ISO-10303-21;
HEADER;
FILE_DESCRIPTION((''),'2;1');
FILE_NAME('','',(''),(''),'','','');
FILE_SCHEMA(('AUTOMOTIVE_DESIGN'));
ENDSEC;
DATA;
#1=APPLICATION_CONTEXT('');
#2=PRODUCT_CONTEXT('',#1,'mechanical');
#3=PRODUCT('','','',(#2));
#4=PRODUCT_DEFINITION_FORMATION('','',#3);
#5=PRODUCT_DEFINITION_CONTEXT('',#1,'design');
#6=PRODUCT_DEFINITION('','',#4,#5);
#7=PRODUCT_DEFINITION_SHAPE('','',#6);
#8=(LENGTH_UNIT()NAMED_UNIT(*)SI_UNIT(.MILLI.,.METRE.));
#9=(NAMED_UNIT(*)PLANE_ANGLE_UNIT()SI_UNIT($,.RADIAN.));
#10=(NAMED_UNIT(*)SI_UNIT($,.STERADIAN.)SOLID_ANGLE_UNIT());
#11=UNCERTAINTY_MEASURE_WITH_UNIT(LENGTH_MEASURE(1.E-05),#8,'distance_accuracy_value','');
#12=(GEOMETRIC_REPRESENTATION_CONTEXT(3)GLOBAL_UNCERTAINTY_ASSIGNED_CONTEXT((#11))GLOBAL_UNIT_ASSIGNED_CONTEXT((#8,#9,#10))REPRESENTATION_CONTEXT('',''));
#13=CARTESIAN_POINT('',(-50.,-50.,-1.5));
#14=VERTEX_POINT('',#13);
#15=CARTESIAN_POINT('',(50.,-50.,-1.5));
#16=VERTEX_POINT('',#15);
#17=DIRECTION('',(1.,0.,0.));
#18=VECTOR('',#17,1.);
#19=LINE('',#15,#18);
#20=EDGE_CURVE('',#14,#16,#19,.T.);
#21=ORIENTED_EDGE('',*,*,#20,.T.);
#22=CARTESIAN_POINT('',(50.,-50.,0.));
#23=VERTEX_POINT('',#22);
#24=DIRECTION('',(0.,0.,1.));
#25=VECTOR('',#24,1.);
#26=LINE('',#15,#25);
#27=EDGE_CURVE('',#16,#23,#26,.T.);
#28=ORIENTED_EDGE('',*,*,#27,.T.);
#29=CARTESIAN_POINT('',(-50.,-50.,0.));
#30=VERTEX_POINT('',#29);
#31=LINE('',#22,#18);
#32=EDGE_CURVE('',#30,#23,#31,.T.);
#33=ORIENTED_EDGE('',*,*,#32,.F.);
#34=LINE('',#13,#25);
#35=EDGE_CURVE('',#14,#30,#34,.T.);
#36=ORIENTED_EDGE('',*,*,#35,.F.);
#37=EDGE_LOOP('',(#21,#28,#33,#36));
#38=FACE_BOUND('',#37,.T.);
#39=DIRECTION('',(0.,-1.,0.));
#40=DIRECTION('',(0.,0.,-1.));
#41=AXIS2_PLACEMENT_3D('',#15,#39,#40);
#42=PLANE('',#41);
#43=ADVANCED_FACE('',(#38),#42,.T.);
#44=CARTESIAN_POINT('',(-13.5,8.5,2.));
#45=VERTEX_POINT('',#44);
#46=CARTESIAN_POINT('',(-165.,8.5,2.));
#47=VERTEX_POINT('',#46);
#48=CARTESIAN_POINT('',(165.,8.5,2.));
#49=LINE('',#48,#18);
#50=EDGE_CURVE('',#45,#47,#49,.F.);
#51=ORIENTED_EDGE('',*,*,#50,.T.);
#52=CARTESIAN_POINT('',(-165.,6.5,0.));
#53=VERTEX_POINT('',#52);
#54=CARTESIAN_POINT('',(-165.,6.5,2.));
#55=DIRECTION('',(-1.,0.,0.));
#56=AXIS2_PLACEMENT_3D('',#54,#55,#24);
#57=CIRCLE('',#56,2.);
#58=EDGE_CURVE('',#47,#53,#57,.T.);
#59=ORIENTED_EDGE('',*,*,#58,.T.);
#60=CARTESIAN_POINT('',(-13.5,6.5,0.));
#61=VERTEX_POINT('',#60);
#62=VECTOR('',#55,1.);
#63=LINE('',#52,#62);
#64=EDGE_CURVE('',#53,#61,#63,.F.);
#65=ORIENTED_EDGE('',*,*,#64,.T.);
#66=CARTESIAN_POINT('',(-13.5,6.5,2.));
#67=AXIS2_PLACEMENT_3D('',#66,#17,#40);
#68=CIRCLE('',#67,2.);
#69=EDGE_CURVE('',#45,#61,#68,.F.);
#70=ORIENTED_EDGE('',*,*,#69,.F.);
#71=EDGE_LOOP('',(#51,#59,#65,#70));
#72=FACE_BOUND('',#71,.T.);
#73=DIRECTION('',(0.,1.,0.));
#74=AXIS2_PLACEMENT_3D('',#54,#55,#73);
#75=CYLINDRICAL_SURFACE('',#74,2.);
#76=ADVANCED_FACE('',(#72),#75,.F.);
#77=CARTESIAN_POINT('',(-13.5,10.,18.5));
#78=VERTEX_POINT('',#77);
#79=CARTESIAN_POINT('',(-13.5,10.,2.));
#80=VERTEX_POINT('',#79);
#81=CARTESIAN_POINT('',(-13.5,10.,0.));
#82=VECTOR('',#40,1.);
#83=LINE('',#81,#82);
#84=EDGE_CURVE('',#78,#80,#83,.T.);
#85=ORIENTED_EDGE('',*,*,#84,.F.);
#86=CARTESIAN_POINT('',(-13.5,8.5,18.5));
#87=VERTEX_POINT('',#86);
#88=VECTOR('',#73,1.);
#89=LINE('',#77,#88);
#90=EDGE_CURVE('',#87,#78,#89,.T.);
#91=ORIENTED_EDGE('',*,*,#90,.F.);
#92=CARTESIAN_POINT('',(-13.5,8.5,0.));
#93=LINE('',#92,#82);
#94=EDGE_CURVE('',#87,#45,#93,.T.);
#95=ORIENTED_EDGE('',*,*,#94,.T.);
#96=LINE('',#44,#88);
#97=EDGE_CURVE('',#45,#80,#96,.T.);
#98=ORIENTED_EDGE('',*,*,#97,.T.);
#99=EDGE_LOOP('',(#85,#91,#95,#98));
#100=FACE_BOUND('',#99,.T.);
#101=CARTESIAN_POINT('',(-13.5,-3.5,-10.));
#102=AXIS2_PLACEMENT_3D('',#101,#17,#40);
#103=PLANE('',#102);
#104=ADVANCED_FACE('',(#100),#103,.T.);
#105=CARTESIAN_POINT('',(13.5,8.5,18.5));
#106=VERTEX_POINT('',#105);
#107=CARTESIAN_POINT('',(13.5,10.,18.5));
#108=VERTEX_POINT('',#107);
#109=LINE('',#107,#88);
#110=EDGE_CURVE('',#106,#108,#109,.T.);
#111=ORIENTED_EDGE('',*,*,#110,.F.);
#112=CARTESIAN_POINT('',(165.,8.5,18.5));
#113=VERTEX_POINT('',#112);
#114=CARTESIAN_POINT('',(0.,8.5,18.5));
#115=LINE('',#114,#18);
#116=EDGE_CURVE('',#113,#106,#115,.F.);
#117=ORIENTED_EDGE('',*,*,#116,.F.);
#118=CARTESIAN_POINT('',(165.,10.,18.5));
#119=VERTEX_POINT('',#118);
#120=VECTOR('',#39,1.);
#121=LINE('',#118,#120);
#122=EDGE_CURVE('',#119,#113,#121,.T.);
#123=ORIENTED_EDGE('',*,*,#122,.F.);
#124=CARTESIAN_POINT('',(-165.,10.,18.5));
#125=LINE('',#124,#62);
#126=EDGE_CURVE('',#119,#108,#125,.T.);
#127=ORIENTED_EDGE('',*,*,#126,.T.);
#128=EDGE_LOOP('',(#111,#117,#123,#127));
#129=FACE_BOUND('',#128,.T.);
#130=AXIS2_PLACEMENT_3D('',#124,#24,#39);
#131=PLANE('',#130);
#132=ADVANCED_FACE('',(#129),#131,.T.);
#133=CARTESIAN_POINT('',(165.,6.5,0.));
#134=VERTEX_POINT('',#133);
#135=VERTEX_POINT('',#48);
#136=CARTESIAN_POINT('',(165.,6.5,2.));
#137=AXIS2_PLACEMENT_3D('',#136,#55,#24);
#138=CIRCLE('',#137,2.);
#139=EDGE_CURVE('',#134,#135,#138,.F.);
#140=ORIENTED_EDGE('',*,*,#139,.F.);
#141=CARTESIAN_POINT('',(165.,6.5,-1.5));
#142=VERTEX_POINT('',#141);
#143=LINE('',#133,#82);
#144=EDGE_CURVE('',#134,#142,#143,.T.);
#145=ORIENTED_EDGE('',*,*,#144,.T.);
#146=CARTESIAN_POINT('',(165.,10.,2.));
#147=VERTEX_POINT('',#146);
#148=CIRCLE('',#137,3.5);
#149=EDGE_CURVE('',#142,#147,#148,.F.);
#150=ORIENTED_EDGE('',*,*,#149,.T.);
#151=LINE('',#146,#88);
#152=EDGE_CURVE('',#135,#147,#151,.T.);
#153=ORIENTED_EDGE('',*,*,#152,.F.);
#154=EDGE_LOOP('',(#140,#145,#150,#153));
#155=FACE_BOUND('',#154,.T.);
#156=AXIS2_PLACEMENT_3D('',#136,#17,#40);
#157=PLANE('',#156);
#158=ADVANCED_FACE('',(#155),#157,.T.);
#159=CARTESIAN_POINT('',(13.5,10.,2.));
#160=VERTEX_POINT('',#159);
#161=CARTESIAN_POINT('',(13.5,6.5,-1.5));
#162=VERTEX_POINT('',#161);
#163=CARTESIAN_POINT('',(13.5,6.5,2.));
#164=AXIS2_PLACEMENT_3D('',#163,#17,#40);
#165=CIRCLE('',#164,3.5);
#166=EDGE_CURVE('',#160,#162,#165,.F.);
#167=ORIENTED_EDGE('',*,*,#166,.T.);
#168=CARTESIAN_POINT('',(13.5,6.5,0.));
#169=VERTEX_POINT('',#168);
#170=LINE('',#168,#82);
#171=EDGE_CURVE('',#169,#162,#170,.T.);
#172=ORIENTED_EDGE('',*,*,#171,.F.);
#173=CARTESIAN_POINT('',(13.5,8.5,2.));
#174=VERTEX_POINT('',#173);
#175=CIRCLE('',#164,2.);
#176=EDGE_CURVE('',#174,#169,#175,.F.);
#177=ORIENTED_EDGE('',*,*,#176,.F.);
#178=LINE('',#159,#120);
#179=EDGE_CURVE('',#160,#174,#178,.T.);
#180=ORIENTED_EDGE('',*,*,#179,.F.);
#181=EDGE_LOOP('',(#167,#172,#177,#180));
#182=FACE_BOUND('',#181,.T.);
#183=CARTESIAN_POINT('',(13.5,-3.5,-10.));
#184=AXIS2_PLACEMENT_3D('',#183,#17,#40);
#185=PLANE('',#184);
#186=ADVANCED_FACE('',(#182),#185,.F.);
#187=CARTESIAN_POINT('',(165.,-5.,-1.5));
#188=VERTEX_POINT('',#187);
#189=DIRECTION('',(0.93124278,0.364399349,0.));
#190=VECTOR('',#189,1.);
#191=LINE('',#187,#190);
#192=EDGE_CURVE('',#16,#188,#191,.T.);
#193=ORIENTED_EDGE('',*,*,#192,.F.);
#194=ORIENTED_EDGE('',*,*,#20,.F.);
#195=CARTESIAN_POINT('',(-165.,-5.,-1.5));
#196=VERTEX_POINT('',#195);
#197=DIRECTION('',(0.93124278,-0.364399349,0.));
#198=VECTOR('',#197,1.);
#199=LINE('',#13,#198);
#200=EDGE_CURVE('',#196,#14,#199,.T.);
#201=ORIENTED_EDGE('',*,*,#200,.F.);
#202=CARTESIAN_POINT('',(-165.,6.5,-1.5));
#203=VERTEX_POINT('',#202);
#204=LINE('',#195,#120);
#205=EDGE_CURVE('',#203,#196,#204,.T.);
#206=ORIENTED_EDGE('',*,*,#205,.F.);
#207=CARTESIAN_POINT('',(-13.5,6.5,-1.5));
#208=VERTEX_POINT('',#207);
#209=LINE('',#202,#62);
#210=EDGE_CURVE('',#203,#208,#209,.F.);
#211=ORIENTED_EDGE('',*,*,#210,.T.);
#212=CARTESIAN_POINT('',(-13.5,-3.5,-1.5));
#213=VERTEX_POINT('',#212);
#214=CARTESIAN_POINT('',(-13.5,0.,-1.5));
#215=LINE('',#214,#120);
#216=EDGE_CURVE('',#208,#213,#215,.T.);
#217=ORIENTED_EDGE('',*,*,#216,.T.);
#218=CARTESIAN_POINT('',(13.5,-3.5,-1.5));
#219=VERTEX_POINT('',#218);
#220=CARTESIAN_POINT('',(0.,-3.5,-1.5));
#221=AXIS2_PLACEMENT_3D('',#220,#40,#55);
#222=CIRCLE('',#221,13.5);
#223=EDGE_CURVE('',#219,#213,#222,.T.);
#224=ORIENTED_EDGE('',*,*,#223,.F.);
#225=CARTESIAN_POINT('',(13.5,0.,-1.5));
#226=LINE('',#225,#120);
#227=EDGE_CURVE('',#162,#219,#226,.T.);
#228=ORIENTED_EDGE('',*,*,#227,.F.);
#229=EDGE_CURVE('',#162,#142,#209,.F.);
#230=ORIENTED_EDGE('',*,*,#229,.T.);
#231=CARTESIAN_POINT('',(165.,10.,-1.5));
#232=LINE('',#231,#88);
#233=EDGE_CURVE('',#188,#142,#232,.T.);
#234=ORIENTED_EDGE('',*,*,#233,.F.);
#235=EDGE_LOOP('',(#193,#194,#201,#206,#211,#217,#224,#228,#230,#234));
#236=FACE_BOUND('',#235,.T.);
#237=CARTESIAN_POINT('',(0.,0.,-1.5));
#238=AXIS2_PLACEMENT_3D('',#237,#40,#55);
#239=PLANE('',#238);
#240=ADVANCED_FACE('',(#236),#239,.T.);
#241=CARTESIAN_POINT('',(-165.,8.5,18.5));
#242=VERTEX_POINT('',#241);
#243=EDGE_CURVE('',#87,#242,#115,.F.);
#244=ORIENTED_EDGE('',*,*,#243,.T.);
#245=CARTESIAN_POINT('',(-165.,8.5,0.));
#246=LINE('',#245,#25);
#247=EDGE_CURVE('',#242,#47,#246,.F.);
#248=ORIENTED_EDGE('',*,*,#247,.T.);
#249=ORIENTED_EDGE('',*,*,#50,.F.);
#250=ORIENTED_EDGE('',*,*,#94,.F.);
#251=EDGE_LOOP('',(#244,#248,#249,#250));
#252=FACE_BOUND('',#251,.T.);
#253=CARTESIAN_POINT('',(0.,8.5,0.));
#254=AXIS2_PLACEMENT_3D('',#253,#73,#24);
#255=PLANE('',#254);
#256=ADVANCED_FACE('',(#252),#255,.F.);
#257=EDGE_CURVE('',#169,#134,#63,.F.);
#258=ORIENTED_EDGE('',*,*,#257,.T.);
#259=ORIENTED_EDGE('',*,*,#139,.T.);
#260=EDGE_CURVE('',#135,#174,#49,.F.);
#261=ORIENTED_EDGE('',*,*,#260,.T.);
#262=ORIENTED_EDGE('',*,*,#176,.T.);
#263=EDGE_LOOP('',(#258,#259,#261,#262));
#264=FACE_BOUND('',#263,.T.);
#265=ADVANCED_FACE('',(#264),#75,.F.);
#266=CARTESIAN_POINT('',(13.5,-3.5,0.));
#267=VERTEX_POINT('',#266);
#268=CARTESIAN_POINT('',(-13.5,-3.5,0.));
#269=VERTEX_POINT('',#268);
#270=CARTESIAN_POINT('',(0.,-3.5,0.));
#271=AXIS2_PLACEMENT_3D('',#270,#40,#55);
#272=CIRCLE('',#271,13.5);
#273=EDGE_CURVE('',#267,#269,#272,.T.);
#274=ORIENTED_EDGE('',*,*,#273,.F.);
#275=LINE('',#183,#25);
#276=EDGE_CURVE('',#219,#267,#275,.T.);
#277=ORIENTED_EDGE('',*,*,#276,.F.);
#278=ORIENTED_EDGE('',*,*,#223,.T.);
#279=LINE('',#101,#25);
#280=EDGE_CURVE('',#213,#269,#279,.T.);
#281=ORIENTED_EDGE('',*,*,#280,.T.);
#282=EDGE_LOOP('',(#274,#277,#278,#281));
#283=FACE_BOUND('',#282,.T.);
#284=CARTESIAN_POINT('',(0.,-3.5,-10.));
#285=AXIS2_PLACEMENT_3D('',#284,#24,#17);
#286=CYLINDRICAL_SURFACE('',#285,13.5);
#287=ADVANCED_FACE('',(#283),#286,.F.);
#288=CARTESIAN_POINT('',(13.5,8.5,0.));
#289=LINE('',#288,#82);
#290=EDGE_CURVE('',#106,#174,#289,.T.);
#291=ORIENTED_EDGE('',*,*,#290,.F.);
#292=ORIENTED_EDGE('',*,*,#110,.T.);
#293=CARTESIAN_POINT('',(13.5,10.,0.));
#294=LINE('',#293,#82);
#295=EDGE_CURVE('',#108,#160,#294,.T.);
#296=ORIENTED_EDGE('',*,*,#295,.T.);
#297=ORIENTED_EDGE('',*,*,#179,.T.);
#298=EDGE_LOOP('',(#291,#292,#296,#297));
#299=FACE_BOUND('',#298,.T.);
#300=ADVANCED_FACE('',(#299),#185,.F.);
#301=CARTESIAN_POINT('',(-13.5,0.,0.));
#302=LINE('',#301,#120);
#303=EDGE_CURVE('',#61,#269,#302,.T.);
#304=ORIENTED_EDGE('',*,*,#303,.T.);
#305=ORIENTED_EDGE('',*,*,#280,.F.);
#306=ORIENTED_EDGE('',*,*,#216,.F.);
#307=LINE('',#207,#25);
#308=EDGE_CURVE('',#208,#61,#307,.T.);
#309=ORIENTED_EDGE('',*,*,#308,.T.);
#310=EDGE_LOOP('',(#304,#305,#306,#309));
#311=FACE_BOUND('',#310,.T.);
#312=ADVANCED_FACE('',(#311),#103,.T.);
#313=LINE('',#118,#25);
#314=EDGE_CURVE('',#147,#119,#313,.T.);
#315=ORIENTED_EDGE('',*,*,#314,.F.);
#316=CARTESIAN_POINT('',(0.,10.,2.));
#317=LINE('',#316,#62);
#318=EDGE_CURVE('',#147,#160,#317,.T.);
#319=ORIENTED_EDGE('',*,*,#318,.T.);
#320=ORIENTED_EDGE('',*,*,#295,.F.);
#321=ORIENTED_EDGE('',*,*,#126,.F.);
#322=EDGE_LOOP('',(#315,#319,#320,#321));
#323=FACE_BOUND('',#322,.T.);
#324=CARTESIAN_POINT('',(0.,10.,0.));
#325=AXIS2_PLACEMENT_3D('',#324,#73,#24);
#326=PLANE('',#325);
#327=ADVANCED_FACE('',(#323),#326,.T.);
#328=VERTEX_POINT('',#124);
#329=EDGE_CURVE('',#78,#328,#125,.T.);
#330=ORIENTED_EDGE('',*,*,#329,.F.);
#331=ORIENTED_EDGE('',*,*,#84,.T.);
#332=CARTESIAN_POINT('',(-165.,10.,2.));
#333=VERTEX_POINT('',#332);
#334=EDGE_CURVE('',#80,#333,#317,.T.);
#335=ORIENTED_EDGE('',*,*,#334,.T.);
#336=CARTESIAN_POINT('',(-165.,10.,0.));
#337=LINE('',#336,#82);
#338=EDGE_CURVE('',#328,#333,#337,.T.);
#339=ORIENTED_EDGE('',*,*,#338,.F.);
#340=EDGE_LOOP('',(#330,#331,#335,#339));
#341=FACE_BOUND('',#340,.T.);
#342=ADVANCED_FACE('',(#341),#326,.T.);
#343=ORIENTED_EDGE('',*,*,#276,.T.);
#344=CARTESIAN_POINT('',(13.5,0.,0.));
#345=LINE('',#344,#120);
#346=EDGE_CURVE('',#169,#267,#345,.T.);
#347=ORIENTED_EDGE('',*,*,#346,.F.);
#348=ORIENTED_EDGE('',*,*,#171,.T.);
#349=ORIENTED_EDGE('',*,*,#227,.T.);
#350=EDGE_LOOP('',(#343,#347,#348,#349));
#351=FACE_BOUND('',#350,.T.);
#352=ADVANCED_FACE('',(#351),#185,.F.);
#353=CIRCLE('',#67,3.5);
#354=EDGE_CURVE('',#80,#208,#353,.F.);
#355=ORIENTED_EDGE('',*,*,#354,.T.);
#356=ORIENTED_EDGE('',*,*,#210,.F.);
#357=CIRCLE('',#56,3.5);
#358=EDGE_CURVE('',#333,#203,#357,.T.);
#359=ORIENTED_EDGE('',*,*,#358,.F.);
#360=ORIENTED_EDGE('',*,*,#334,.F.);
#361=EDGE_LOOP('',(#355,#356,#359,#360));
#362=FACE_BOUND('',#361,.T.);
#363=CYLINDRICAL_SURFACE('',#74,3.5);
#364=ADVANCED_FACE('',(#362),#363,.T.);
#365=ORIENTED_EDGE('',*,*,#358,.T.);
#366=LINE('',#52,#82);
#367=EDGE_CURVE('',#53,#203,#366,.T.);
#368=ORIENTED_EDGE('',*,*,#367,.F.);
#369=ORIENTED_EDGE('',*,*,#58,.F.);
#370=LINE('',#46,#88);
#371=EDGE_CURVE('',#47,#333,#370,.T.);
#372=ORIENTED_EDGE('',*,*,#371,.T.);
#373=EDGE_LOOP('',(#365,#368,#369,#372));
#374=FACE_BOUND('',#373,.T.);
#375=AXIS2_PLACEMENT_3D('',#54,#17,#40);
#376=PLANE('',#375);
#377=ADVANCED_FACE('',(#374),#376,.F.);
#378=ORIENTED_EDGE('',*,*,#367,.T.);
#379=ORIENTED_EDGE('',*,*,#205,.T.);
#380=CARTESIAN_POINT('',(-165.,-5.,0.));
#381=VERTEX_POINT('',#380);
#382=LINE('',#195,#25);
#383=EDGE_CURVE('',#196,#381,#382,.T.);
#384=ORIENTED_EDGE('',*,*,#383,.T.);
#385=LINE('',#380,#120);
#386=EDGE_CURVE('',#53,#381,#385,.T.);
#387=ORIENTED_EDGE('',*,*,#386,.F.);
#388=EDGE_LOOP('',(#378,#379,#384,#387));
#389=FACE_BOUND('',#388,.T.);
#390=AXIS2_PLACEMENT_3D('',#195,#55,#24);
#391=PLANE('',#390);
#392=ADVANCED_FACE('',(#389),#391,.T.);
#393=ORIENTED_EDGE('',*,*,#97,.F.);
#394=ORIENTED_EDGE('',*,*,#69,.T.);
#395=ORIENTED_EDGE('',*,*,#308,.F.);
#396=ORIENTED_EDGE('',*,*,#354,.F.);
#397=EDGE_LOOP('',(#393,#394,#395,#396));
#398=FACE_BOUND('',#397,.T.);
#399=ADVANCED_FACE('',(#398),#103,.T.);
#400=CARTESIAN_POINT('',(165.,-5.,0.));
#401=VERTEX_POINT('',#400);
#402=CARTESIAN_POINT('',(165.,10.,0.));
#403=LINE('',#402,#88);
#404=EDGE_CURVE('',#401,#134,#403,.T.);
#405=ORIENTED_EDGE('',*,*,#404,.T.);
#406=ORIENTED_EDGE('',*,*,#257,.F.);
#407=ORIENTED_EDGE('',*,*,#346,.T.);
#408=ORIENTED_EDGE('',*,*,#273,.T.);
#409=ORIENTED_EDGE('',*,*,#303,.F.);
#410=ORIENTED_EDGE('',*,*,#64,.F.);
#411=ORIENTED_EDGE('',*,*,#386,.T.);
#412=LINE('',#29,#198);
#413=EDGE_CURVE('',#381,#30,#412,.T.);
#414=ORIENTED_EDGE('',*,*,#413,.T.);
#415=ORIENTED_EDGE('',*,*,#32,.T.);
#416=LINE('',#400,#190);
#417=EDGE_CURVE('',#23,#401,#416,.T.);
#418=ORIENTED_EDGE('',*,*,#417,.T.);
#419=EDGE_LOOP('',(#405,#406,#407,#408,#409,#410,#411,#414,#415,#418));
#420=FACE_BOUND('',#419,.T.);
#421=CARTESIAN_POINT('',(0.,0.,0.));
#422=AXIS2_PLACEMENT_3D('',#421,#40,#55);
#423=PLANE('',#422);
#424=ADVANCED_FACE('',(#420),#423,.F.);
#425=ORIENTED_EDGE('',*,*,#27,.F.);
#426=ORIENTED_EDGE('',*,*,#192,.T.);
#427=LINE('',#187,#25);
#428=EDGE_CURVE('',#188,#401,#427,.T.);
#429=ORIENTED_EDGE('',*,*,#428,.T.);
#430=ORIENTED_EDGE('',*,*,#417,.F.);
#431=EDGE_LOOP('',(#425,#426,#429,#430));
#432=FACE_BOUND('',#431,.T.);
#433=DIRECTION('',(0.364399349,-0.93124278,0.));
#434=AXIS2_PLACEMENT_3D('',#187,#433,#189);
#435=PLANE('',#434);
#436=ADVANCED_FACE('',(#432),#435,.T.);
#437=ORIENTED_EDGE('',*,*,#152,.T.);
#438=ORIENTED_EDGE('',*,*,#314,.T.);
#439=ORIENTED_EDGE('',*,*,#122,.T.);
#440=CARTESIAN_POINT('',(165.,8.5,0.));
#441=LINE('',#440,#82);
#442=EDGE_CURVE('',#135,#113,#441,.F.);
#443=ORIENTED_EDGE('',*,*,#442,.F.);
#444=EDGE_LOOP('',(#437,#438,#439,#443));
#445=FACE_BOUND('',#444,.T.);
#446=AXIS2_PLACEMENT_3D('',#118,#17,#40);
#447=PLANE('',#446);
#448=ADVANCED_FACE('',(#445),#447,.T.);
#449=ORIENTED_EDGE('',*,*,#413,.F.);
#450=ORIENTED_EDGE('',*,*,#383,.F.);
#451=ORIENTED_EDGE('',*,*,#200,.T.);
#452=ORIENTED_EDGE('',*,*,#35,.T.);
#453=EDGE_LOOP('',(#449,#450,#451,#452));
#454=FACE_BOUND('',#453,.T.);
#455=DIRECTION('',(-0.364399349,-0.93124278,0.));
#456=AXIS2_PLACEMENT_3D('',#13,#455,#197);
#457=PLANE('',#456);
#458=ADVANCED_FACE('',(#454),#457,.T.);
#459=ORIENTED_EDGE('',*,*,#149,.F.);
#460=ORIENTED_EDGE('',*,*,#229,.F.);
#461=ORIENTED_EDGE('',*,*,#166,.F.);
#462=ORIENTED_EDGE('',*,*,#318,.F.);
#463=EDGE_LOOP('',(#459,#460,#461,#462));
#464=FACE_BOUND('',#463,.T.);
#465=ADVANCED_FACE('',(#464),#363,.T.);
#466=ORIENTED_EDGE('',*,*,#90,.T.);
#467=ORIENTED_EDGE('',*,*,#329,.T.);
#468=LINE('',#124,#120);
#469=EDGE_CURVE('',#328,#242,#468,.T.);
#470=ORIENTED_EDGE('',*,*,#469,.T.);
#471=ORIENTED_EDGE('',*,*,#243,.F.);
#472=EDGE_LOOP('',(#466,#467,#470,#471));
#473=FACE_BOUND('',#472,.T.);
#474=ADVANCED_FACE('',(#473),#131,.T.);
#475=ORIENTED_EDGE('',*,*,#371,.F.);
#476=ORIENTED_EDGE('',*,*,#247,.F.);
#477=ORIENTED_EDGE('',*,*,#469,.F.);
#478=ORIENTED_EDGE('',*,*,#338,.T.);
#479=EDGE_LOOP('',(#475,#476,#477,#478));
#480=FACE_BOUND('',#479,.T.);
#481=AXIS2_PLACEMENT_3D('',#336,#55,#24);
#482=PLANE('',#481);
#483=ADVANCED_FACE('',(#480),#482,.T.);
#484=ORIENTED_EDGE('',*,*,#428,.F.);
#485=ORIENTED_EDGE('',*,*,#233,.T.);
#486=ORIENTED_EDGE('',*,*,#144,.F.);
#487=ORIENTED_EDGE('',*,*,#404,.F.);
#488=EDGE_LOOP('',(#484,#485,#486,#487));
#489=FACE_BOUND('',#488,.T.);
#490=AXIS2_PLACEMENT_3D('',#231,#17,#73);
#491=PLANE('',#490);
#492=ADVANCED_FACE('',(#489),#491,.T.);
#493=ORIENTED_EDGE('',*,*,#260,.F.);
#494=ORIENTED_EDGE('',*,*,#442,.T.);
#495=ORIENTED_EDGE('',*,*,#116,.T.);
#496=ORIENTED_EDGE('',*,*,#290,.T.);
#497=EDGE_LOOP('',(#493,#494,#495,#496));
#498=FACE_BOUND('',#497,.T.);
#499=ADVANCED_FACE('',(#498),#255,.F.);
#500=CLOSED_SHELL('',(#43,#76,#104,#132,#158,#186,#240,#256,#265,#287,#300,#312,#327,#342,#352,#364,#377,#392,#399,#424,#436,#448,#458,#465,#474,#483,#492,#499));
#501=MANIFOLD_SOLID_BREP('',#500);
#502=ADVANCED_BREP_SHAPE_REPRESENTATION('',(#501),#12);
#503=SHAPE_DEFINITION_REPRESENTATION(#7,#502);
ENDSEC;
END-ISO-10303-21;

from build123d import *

# Parameters (mm, degrees)
BASE_FLANGE2_DEPTH           = 1.5
EDGE_FLANGE1_STRIP_W         = 10
EDGE_FLANGE1_STRIP_H         = 1.5
EDGE_FLANGE1_STRIP_CUT_DEPTH = 330
EDGE_FLANGE1_DEPTH           = 330
CUT_EXTRUDE1_DEPTH           = 174.399106111
CUT_EXTRUDE1_DEPTH_BACK      = 10


# Sheet-metal steps are written as plain solids
with BuildPart() as part:
    # Sketch1 → Base-Flange2 (new body)
    with BuildSketch(Plane.XY):
        Polygon((-165, 10), (165, 10), (165, -5), (50, -50), (-50, -50), (-165, -5), align=None)
    extrude(amount=-BASE_FLANGE2_DEPTH)

    # Edge-Flange1 strip (across the edge) → Edge-Flange1 strip cut (cut)
    with BuildSketch(Plane(origin=(165, 10, 0), x_dir=(0, -1, 0), z_dir=(-1, 0, 0))):
        with Locations((-1.5, -0.75)):
            Rectangle(EDGE_FLANGE1_STRIP_W, EDGE_FLANGE1_STRIP_H)
    extrude(amount=EDGE_FLANGE1_STRIP_CUT_DEPTH, mode=Mode.SUBTRACT)

    # Edge-Flange1 section (across the edge) → Edge-Flange1 (add)
    with BuildSketch(Plane(origin=(165, 10, 0), x_dir=(0, -1, 0), z_dir=(-1, 0, 0))):
        with BuildLine():
            Line((0, 2), (0, 18.5))
            Line((0, 18.5), (1.5, 18.5))
            Line((1.5, 18.5), (1.5, 2))
            ThreePointArc((1.5, 2), (2.085786438, 0.585786438), (3.5, 0))
            Line((3.5, 0), (3.5, -1.5))
            ThreePointArc((3.5, -1.5), (1.025126266, -0.474873734), (0, 2))
        make_face()
    extrude(amount=EDGE_FLANGE1_DEPTH)

    # Sketch13 → Cut-Extrude1 (cut, two sides: drawn at the far end of the back side and taken through both)
    with BuildSketch(Plane.XY.offset(-CUT_EXTRUDE1_DEPTH_BACK)):
        with BuildLine():
            Line((-13.5, -3.5), (-13.5, 21.0126417))
            Line((-13.5, 21.0126417), (13.5, 21.0126417))
            Line((13.5, 21.0126417), (13.5, -3.5))
            ThreePointArc((13.5, -3.5), (0, -17), (-13.5, -3.5))
        make_face()
    extrude(amount=CUT_EXTRUDE1_DEPTH + CUT_EXTRUDE1_DEPTH_BACK, mode=Mode.SUBTRACT)


solid = part.part
